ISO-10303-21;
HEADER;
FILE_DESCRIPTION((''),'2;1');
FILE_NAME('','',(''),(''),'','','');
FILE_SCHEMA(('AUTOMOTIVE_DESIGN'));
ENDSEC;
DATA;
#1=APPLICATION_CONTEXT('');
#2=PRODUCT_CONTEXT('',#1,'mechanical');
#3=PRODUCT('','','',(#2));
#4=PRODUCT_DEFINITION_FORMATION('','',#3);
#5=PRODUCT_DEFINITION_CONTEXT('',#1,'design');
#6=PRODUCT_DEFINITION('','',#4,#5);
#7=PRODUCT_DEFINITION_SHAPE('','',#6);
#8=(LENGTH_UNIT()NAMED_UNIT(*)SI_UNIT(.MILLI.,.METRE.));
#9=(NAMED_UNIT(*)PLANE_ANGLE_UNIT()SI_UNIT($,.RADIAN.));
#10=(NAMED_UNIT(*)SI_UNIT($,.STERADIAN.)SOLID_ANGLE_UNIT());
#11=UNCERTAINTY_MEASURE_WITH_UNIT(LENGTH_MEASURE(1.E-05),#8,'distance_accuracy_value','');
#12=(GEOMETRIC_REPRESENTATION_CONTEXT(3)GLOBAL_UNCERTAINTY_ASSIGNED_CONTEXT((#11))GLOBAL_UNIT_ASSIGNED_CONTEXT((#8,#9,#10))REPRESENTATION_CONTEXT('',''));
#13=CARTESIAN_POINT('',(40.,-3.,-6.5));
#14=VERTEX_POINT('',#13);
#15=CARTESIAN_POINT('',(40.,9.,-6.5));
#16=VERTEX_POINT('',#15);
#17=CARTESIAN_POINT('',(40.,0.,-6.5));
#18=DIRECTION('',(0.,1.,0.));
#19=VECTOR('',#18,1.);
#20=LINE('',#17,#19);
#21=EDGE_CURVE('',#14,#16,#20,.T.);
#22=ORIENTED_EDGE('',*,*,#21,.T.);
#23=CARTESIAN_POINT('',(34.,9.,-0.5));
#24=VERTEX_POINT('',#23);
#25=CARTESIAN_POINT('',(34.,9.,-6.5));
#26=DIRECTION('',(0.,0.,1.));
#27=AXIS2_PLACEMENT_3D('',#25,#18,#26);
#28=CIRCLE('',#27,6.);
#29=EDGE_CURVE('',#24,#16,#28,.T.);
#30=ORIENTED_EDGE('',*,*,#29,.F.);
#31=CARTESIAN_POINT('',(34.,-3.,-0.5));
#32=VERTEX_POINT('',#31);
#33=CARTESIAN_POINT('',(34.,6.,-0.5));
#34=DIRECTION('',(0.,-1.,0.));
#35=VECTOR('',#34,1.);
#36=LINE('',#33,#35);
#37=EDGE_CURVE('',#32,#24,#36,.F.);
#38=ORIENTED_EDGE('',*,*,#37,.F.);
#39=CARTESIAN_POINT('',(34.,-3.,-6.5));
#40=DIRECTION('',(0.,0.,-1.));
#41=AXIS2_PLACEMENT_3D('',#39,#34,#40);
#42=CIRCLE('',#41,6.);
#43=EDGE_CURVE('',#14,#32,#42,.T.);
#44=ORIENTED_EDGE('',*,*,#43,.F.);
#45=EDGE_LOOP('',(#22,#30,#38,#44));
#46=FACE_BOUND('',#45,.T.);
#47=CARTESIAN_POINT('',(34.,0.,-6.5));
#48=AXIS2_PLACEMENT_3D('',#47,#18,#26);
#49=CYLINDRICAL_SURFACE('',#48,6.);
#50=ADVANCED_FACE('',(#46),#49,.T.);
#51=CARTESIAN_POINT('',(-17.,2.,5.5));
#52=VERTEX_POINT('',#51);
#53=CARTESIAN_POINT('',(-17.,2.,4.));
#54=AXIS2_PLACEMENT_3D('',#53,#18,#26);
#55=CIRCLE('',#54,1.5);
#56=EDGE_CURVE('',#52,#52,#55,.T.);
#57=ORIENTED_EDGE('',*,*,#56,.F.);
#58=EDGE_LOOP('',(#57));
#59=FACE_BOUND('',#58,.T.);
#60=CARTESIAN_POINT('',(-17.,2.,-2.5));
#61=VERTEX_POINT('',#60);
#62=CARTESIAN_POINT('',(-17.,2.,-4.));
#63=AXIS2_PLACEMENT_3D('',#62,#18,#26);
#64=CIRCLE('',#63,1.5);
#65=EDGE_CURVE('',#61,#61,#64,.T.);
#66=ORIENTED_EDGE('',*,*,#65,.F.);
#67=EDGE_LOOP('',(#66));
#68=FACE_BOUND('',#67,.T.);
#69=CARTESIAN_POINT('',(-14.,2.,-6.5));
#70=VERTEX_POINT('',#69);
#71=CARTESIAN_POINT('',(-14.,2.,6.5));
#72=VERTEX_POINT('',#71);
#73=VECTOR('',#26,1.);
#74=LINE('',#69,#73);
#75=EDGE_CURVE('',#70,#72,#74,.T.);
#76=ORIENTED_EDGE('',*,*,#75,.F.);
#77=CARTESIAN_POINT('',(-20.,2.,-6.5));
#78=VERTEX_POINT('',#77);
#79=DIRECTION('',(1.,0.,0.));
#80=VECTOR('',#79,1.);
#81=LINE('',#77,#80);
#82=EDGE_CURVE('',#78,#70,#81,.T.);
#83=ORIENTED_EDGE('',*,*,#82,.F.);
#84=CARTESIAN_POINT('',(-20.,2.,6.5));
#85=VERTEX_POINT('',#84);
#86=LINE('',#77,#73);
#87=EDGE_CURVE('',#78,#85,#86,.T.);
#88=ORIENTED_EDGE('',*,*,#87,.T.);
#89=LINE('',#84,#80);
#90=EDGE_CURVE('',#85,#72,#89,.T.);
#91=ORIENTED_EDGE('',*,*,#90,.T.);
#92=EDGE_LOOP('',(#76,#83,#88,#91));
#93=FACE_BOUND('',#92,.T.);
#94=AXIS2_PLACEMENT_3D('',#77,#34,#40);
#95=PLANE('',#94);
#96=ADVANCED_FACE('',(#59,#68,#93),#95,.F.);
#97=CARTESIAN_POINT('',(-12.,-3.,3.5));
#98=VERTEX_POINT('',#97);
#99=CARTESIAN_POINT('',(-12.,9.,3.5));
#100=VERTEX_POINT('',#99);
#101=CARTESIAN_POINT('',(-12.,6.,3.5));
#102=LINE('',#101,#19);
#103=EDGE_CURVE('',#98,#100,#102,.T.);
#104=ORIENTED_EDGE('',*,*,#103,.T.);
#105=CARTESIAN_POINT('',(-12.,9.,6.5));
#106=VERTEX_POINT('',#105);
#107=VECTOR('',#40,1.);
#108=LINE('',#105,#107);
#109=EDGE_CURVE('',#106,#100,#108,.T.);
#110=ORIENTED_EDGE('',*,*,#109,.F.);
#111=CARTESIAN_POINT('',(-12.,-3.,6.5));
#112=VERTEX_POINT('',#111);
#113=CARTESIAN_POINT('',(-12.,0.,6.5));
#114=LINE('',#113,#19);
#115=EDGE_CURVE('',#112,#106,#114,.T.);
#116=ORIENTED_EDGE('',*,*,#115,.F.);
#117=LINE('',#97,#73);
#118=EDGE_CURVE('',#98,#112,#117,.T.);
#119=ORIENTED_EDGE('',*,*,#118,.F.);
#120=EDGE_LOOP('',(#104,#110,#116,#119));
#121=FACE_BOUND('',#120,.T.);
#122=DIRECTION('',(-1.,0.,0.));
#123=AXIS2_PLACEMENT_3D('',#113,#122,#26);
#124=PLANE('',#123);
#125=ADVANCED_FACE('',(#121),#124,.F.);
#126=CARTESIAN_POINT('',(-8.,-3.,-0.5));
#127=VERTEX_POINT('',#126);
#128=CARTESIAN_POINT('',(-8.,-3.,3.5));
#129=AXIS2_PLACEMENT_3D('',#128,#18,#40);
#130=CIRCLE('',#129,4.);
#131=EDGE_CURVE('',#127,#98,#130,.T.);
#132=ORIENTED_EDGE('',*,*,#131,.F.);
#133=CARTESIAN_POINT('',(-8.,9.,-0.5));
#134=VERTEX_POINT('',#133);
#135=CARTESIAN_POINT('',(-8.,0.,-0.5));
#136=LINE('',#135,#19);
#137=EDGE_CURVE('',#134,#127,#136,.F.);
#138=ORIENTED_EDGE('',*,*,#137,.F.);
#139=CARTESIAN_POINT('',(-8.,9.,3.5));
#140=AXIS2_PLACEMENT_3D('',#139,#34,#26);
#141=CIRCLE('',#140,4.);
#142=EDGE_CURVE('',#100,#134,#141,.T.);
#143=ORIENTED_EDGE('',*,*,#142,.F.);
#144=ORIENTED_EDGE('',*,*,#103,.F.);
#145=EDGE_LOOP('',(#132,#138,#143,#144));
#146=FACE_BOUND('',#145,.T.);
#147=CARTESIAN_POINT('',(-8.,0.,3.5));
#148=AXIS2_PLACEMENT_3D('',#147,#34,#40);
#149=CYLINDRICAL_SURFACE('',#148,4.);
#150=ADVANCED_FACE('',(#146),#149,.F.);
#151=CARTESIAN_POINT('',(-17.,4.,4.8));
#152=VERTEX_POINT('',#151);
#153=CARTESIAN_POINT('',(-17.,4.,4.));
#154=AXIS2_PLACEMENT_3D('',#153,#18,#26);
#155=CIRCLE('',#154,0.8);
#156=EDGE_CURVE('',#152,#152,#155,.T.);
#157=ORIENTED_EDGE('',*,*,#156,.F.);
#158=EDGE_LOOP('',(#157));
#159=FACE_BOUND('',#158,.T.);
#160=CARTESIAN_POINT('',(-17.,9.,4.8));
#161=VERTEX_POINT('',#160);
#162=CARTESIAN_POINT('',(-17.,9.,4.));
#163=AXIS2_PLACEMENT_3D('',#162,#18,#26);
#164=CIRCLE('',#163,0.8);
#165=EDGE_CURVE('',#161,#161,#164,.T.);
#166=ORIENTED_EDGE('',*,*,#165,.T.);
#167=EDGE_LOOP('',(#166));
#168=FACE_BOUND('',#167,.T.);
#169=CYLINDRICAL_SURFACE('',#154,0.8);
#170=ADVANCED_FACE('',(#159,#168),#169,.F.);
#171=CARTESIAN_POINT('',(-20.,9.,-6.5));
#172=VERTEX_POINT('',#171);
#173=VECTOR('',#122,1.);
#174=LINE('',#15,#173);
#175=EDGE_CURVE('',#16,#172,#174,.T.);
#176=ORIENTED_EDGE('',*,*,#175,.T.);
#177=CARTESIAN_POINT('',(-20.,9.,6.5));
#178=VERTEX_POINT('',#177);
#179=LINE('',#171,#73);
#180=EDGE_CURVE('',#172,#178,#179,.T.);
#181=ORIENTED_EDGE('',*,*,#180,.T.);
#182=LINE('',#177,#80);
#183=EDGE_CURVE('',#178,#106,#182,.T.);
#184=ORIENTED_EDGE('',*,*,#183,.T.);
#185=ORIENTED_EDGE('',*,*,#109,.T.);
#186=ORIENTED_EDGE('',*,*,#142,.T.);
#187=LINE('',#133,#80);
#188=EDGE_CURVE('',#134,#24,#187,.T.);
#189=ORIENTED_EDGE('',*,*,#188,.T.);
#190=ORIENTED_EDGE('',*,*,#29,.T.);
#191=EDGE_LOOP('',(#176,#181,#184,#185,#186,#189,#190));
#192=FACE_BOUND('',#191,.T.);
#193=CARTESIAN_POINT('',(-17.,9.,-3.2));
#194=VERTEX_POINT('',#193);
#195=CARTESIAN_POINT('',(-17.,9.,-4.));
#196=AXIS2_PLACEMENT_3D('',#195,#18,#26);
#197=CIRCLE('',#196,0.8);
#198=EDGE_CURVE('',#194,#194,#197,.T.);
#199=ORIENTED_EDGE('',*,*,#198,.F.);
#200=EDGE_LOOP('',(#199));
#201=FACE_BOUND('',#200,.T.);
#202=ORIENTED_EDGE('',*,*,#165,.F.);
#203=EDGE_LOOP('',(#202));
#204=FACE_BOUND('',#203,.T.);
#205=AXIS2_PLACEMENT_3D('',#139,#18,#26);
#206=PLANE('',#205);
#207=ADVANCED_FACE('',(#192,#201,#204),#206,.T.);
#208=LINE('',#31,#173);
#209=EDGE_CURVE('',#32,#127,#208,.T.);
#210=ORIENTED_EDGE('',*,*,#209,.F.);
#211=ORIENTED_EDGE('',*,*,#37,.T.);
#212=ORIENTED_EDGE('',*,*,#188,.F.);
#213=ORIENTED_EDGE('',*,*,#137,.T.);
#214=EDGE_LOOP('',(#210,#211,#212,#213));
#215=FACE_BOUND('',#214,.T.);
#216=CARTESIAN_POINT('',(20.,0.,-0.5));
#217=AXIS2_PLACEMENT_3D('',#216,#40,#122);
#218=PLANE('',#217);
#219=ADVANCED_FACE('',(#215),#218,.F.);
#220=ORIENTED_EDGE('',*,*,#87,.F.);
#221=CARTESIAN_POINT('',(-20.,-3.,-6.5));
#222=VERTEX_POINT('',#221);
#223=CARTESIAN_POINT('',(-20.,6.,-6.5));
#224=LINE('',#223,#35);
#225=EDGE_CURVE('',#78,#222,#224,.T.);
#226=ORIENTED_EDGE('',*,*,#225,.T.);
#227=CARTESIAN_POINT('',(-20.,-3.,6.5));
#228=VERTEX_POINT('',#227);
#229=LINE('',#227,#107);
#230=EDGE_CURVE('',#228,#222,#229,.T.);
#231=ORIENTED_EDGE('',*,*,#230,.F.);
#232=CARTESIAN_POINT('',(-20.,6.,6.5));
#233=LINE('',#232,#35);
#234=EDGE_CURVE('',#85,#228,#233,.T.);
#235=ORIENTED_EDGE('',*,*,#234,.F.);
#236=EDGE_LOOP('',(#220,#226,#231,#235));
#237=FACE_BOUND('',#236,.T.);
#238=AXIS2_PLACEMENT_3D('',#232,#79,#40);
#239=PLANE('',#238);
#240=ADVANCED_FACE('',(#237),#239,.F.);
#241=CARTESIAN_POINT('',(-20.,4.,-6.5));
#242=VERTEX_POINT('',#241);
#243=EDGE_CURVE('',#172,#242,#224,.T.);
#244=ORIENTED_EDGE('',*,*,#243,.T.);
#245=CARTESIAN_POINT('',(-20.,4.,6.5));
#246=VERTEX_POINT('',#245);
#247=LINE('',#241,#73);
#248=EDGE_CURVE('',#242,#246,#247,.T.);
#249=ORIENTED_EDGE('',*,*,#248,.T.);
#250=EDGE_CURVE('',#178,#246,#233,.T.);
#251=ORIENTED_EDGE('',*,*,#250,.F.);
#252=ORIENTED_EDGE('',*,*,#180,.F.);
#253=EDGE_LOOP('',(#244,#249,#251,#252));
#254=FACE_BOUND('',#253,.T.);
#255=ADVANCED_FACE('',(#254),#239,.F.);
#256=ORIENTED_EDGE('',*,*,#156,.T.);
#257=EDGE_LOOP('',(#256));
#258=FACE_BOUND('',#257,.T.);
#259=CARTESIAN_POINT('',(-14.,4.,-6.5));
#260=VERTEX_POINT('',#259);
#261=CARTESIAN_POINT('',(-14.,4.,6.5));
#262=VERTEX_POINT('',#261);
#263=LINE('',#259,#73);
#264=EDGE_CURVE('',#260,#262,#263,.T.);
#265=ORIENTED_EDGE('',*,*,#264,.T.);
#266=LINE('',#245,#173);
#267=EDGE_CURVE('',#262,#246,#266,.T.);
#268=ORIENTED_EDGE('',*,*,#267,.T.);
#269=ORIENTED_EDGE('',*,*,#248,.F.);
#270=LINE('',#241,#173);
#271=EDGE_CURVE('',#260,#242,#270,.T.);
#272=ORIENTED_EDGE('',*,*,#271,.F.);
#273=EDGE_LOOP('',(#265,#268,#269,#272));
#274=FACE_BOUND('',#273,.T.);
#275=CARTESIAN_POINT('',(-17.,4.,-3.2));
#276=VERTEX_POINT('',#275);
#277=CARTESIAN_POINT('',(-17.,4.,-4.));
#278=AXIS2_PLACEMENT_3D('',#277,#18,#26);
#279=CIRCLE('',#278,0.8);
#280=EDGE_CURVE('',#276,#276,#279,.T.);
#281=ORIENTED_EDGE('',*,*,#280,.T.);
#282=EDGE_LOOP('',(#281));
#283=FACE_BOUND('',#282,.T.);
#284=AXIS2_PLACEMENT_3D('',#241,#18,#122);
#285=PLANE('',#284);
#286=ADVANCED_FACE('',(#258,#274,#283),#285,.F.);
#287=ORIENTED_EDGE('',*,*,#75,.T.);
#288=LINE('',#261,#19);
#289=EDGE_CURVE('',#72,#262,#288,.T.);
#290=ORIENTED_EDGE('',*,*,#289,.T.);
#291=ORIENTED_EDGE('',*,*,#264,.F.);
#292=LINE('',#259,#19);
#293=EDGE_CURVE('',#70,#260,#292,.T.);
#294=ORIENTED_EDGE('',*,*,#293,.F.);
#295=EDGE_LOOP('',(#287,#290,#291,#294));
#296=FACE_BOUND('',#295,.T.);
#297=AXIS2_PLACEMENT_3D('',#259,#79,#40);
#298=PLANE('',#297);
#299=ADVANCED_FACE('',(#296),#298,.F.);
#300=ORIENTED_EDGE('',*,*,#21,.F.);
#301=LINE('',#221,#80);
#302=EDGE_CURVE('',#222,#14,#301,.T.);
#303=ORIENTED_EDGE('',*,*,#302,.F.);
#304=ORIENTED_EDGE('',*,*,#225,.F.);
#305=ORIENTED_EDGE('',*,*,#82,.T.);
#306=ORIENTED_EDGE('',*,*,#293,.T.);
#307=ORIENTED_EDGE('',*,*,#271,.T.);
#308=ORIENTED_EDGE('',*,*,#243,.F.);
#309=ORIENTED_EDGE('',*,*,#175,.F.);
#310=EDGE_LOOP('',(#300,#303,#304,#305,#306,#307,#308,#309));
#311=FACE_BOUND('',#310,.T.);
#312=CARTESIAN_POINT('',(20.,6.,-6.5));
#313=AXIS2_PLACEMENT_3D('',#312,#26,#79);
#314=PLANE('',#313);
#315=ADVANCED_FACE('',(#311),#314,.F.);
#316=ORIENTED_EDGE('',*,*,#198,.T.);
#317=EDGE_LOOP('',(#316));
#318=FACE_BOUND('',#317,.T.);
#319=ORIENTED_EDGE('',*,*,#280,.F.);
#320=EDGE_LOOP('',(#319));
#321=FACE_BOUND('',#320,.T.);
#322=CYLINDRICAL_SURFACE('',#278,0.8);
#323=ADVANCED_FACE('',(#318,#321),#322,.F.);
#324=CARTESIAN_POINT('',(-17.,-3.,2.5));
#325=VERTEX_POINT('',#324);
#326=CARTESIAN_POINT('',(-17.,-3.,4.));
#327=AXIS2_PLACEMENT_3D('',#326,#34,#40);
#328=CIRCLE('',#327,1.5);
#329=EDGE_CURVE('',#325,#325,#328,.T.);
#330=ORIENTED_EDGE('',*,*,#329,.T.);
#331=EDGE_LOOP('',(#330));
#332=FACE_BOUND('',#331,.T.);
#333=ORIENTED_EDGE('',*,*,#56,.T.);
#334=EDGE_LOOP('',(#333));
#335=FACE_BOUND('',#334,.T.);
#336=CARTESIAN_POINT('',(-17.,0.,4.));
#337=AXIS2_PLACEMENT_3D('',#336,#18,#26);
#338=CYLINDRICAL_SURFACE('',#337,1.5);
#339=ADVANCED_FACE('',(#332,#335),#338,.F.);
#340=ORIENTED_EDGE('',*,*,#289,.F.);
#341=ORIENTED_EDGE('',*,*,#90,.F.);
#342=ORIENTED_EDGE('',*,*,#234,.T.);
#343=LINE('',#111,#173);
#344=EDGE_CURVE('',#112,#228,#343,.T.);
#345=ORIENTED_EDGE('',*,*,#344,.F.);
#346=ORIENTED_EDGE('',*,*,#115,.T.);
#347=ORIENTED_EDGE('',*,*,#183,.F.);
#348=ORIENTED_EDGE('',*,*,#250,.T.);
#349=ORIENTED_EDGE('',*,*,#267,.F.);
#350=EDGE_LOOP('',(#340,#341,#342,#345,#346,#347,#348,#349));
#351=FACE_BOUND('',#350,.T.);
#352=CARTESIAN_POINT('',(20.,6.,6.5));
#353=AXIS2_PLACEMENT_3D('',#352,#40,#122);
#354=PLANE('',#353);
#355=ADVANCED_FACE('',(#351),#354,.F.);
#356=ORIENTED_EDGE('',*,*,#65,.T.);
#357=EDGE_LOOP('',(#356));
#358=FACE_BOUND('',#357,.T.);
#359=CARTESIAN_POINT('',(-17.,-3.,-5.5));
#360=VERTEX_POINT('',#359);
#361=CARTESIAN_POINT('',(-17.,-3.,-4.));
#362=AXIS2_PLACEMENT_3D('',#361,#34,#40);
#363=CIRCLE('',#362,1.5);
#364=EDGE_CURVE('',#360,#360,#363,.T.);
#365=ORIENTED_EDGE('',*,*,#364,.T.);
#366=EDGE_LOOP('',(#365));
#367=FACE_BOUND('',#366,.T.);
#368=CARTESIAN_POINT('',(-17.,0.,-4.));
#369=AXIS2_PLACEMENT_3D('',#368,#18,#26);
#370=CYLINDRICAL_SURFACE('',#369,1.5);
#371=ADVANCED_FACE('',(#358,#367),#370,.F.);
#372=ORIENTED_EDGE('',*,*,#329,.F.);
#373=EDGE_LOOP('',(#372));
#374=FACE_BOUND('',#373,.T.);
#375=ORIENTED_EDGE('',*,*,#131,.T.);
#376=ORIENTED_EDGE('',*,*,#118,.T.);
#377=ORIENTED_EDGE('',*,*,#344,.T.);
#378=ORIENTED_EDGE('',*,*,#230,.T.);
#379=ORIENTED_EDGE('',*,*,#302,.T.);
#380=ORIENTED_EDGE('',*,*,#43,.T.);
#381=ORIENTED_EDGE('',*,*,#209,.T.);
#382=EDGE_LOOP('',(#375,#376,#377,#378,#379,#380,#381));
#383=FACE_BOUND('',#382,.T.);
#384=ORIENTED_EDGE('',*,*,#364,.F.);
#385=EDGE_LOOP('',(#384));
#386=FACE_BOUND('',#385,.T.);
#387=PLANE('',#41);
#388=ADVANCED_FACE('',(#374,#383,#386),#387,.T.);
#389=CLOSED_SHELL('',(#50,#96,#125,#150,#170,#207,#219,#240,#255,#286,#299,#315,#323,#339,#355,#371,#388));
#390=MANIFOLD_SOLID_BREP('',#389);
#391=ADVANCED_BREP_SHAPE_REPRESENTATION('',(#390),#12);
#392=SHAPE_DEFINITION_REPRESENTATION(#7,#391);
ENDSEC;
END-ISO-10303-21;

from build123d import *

# Parameters (mm, degrees)
SKETCH1_W           = 40
SKETCH1_H           = 13
BOSS_EXTRUDE1_DEPTH = 6
SKETCH2_W           = 6
SKETCH2_H           = 2
CUT_EXTRUDE1_DEPTH  = 25.596747752
SKETCH3_R           = 0.8
CUT_EXTRUDE2_DEPTH  = 2
SKETCH4_W           = 32
SKETCH4_H           = 7
CUT_EXTRUDE3_DEPTH  = 22.868927729
FILLET1_R           = 4
SKETCH5_R           = 1.5
CUT_EXTRUDE4_DEPTH  = 2
SKETCH6_W           = 6
SKETCH6_H           = 6
BOSS_EXTRUDE2_DEPTH = 20
FILLET3_R           = 6
SKETCH7_R           = 1.5
BOSS_EXTRUDE3_DEPTH = 3
BOSS_EXTRUDE4_START = 3
SKETCH8_R           = 0.8
BOSS_EXTRUDE4_DEPTH = 3


with BuildPart() as part:
    # Sketch1 → Boss-Extrude1 (new body)
    with BuildSketch(Plane(origin=(0, 0, 0), x_dir=(1, 0, 0), z_dir=(0, 1, 0))):
        Rectangle(SKETCH1_W, SKETCH1_H)
    extrude(amount=BOSS_EXTRUDE1_DEPTH)

    # Sketch2 → Cut-Extrude1 (cut, through all)
    with BuildSketch(Plane.XY.offset(6.5)):
        with Locations((-17, 3)):
            Rectangle(SKETCH2_W, SKETCH2_H)
    extrude(amount=-CUT_EXTRUDE1_DEPTH, mode=Mode.SUBTRACT)

    # Sketch3 → Cut-Extrude2 (cut)
    with BuildSketch(Plane(origin=(0, 6, 0), x_dir=(1, 0, 0), z_dir=(0, 1, 0))):
        with Locations(Location((-17, 4, 0), (0, 0, 270))):
            Circle(SKETCH3_R)
        with Locations(Location((-17, -4, 0), (0, 0, 270))):
            Circle(SKETCH3_R)
    extrude(amount=-CUT_EXTRUDE2_DEPTH, mode=Mode.SUBTRACT)

    # Sketch4 → Cut-Extrude3 (cut, through all)
    with BuildSketch(Plane(origin=(0, 6, 0), x_dir=(1, 0, 0), z_dir=(0, 1, 0))):
        with Locations((4, -3)):
            Rectangle(SKETCH4_W, SKETCH4_H)
    extrude(amount=-CUT_EXTRUDE3_DEPTH, mode=Mode.SUBTRACT)

    # Fillet1
    fillet1_edges = [part.edges().sort_by_distance(p)[0] for p in [
        (-12, 3, -0.5),
    ]]
    fillet(fillet1_edges, radius=FILLET1_R)

    # Sketch5 → Cut-Extrude4 (cut)
    with BuildSketch(Plane(origin=(0, 2, 0), x_dir=(1, 0, 0), z_dir=(0, 1, 0))):
        with Locations(Location((-17, 4, 0), (0, 0, 270))):
            Circle(SKETCH5_R)
        with Locations(Location((-17, -4, 0), (0, 0, 270))):
            Circle(SKETCH5_R)
    extrude(amount=-CUT_EXTRUDE4_DEPTH, mode=Mode.SUBTRACT)

    # Sketch6 → Boss-Extrude2 (add)
    with BuildSketch(Plane(origin=(20, 0, 0), x_dir=(0, 0, -1), z_dir=(1, 0, 0))):
        with Locations((3.5, 3)):
            Rectangle(SKETCH6_W, SKETCH6_H)
    extrude(amount=BOSS_EXTRUDE2_DEPTH)

    # Fillet3
    fillet3_edges = [part.edges().sort_by_distance(p)[0] for p in [
        (40, 3, -0.5),
    ]]
    fillet(fillet3_edges, radius=FILLET3_R - 0.0001)  # a hair under: the kernel refuses the full size

    # Sketch7 → Boss-Extrude3 (add)
    with BuildSketch(Plane.XZ):
        with BuildLine():
            Line((-20, -6.5), (40, -6.5))
            ThreePointArc((40, -6.5), (38.242640687, -2.257359313), (34, -0.5))
            Line((34, -0.5), (-8, -0.5))
            ThreePointArc((-8, -0.5), (-10.828427125, 0.671572875), (-12, 3.5))
            Line((-12, 3.5), (-12, 6.5))
            Line((-12, 6.5), (-20, 6.5))
            Line((-20, 6.5), (-20, -6.5))
        make_face()
        with Locations(Location((-17, 4, 0), (0, 0, 90))):
            Circle(SKETCH7_R, mode=Mode.SUBTRACT)
        with Locations(Location((-17, -4, 0), (0, 0, 90))):
            Circle(SKETCH7_R, mode=Mode.SUBTRACT)
    extrude(amount=BOSS_EXTRUDE3_DEPTH)

    # Sketch8 → Boss-Extrude4 (add)
    with BuildSketch(Plane(origin=(0, 6, 0), x_dir=(1, 0, 0), z_dir=(0, 1, 0)).offset(BOSS_EXTRUDE4_START)):
        with BuildLine():
            Line((-8, 0.5), (34, 0.5))
            ThreePointArc((34, 0.5), (38.242640687, 2.257359313), (40, 6.5))
            Line((40, 6.5), (-20, 6.5))
            Line((-20, 6.5), (-20, -6.5))
            Line((-20, -6.5), (-12, -6.5))
            Line((-12, -6.5), (-12, -3.5))
            ThreePointArc((-12, -3.5), (-10.828427125, -0.671572875), (-8, 0.5))
        make_face()
        with Locations(Location((-17, -4, 0), (0, 0, 270))):
            Circle(SKETCH8_R, mode=Mode.SUBTRACT)
        with Locations(Location((-17, 4, 0), (0, 0, 270))):
            Circle(SKETCH8_R, mode=Mode.SUBTRACT)
    extrude(amount=-BOSS_EXTRUDE4_DEPTH)


solid = part.part
